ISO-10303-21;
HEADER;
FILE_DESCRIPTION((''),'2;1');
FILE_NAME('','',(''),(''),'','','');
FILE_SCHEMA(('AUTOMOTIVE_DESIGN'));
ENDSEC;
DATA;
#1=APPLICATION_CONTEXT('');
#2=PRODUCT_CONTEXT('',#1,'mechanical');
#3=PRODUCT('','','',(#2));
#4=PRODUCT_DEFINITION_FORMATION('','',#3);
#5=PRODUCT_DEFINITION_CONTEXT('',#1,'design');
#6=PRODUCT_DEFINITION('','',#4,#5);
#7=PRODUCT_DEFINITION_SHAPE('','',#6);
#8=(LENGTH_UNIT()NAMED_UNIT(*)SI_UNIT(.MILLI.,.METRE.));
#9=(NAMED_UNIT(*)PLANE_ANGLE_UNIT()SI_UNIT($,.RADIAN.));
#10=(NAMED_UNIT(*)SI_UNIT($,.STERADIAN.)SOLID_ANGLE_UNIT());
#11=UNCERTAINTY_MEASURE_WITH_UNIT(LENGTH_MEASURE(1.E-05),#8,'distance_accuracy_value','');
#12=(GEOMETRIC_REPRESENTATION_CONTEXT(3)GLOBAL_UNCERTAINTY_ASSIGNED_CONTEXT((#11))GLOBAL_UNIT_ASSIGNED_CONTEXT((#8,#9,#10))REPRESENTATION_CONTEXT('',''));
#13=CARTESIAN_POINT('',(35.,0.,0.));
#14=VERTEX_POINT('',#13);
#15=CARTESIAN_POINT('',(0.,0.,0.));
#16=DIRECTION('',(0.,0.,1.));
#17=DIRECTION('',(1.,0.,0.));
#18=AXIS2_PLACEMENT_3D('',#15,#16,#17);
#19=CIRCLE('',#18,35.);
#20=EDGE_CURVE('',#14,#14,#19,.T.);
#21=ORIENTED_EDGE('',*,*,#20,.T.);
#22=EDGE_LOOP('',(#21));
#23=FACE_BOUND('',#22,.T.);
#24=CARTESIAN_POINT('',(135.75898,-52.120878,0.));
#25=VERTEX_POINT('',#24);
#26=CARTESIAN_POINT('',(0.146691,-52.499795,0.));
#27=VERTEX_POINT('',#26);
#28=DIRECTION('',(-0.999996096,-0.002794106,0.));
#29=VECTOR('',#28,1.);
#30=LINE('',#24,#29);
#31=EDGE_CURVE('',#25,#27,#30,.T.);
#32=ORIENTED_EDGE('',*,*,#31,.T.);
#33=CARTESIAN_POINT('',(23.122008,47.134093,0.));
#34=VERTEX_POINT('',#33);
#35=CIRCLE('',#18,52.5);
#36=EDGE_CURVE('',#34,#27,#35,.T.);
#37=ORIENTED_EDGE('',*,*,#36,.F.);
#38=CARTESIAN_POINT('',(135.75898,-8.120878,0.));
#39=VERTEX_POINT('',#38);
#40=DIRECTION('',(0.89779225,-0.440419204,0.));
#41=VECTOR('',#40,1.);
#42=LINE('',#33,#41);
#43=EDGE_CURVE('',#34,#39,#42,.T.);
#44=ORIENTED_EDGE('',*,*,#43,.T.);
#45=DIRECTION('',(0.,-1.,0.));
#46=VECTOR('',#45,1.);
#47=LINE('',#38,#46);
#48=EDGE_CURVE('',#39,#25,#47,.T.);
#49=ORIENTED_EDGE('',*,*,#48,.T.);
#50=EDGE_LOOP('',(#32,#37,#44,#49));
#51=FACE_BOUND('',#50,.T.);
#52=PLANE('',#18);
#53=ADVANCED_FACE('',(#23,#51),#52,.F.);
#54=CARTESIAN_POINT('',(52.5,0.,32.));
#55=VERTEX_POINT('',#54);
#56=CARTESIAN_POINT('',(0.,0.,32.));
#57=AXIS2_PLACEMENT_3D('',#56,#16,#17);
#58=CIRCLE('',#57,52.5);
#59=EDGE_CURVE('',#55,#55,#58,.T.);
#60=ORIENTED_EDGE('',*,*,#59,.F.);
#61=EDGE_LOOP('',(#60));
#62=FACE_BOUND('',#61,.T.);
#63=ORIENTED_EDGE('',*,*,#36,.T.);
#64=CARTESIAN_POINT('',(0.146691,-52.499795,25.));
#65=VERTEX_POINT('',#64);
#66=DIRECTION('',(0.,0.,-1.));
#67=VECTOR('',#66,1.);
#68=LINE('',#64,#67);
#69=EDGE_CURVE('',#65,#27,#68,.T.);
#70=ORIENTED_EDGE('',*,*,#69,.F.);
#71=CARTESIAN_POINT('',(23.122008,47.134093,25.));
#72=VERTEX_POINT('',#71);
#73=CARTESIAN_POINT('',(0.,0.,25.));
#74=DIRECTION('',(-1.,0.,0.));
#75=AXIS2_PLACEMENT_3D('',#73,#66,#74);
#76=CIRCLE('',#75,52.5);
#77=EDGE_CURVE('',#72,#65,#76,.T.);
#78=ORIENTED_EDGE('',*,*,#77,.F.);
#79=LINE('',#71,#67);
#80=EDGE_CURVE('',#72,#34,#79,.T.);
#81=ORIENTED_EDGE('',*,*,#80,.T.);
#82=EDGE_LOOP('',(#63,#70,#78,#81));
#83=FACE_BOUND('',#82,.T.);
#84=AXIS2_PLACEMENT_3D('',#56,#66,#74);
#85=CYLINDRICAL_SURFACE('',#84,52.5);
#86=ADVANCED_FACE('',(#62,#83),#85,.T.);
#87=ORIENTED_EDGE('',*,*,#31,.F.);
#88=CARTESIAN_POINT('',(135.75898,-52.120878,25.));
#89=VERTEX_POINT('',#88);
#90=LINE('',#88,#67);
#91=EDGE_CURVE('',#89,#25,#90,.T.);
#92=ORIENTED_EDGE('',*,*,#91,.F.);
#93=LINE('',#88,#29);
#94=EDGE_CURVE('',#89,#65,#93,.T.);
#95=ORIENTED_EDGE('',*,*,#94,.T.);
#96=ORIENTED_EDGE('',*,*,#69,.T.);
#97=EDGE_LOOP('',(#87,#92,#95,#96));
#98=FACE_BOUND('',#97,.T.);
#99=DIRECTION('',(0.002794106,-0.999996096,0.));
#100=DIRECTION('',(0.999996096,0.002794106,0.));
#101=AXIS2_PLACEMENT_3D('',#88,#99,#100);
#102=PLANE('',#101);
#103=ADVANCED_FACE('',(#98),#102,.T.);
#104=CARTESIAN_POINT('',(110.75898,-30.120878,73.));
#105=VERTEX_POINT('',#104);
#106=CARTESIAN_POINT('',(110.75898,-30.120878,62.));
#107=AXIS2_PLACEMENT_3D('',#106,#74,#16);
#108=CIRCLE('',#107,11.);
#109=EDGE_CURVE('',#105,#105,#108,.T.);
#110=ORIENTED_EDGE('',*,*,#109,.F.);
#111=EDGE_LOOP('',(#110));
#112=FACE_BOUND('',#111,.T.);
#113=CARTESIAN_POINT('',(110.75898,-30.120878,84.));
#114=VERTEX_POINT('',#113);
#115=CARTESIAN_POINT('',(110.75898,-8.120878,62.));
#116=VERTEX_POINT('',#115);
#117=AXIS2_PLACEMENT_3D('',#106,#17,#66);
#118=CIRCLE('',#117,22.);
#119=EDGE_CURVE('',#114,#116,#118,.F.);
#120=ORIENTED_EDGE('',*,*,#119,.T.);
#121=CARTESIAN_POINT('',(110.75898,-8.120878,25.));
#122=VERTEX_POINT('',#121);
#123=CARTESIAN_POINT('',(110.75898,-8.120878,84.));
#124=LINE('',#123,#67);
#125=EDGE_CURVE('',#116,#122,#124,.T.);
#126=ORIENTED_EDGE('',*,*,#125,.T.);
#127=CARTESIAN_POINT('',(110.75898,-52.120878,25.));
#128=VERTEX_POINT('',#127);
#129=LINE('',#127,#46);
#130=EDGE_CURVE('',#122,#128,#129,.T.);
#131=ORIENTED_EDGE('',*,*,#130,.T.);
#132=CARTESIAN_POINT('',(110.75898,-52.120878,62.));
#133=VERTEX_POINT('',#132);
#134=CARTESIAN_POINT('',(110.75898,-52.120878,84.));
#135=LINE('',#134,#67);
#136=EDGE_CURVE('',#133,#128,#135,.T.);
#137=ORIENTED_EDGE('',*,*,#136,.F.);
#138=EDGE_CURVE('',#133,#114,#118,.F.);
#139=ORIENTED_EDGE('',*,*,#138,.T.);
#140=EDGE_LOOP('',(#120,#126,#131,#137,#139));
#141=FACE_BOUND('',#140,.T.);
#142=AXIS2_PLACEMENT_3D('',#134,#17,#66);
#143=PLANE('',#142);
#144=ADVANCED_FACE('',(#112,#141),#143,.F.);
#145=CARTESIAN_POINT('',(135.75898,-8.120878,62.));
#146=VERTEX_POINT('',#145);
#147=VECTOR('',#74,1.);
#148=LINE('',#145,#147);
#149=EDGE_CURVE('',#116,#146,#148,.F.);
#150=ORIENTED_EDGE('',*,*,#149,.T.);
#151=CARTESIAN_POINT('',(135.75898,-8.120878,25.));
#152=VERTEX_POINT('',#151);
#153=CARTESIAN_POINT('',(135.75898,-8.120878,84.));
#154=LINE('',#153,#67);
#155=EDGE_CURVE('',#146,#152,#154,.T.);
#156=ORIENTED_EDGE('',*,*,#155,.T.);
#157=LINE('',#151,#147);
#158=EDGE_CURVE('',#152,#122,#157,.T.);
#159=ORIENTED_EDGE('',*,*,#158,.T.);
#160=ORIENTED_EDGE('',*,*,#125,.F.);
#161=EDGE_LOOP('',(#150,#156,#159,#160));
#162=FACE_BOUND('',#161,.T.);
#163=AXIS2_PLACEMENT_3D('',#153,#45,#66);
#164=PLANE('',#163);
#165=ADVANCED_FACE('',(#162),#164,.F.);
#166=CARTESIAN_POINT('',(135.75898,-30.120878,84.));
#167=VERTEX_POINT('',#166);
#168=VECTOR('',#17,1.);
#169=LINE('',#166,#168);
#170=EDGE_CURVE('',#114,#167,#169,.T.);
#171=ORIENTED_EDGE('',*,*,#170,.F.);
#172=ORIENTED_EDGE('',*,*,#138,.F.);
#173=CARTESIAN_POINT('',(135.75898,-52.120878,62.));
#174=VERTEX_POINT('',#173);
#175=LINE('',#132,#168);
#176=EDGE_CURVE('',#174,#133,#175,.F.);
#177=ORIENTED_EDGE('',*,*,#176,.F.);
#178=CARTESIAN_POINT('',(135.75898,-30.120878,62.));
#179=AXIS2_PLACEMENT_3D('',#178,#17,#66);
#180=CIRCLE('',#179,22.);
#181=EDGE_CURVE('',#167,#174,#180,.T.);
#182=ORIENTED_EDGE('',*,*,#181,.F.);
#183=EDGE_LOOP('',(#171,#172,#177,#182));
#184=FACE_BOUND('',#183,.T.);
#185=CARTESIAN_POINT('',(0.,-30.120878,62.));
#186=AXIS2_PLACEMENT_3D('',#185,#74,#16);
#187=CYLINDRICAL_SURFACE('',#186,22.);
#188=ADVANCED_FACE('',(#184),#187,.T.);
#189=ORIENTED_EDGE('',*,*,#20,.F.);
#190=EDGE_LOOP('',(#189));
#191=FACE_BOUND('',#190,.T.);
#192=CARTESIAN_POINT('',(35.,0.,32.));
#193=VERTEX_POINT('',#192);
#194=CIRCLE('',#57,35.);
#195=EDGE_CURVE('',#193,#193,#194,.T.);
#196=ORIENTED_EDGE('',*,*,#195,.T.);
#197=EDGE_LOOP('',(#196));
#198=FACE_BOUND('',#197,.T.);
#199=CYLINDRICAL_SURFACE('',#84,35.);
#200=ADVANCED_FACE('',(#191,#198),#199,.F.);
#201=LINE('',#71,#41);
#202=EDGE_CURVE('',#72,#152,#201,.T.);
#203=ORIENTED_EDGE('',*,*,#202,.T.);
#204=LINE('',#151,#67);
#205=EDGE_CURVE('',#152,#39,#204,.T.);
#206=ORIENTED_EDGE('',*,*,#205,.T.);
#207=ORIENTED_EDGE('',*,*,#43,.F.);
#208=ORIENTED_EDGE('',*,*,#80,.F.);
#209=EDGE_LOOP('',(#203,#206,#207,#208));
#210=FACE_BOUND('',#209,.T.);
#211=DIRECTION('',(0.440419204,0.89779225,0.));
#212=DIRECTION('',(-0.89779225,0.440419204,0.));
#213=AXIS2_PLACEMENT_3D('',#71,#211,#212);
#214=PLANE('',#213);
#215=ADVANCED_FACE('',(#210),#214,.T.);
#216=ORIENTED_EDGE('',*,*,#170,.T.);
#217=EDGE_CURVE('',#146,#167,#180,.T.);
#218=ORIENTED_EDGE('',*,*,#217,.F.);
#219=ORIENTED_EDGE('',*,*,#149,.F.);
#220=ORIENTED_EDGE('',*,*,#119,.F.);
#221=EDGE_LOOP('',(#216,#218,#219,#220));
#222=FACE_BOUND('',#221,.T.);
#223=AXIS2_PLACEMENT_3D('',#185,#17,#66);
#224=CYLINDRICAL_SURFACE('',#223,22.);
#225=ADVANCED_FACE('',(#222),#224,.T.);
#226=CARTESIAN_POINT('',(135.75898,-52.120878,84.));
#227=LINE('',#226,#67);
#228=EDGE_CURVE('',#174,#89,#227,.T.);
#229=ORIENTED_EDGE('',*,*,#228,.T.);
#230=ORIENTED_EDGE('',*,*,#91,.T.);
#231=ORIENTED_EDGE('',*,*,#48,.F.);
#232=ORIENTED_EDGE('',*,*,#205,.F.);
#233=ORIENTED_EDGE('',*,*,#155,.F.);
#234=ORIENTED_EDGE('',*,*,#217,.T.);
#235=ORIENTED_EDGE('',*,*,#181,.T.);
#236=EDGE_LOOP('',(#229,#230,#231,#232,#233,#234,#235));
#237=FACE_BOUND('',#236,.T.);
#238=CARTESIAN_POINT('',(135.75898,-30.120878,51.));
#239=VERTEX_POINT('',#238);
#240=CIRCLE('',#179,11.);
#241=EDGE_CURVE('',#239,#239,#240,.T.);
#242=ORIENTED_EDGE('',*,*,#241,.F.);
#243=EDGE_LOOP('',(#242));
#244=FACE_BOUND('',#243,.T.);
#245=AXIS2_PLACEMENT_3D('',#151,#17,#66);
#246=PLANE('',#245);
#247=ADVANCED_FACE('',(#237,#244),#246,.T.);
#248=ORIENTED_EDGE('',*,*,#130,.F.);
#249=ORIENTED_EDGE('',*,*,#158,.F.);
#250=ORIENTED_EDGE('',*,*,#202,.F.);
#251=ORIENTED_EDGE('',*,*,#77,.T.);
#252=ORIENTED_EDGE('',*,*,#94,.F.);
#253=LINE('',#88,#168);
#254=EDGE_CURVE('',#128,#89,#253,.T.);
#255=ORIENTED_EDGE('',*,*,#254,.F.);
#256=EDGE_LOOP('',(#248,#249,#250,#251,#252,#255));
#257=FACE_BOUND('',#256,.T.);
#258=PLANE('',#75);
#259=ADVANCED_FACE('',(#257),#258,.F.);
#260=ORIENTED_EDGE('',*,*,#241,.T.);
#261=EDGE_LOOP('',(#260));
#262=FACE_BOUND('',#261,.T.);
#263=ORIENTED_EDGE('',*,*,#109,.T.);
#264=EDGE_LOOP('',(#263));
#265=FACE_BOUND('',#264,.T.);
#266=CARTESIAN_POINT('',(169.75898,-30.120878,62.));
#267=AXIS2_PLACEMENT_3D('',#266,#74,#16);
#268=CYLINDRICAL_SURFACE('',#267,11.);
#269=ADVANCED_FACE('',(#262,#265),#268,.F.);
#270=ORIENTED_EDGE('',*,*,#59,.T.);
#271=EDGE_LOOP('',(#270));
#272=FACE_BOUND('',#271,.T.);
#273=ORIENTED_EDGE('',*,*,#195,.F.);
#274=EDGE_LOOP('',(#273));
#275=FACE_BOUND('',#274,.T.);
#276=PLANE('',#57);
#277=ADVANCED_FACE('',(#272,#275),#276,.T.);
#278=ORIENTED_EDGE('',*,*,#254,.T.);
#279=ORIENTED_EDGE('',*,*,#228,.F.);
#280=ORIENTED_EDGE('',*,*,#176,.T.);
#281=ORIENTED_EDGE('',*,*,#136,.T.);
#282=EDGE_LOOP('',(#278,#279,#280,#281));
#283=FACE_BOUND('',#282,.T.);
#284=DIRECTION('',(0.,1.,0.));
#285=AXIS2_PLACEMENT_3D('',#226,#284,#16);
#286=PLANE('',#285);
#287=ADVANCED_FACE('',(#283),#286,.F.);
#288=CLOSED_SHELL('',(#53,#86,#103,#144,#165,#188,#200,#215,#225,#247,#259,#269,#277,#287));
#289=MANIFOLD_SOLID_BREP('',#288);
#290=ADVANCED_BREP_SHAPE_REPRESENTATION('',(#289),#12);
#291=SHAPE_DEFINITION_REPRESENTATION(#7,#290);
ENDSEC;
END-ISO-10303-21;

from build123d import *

# Parameters (mm, degrees)
SKETCH_1_R          = 52.5
SKETCH_1_R_2        = 35
EXTRUDE_1_DEPTH     = 32
EXTRUDE_3_DEPTH     = 25
SKETCH_3_W          = 25
SKETCH_3_H          = 44
EXTRUDE_4_DEPTH     = 59
FILLET_1_R          = 22
SKETCH_4_R          = 11
CUT_EXTRUDE_1_DEPTH = 59


with BuildPart() as part:
    # 스케치1 → 보스-돌출1 (new body)
    with BuildSketch(Plane.XY):
        Circle(SKETCH_1_R)
        Circle(SKETCH_1_R_2, mode=Mode.SUBTRACT)
    extrude(amount=EXTRUDE_1_DEPTH)

    # 스케치2 → 보스-돌출3 (add)
    with BuildSketch(Plane(origin=(0, 0, 0), x_dir=(-1, 0, 0), z_dir=(0, 0, -1))):
        with BuildLine():
            Line((-23.122008196, 47.134093149), (-135.758979711, -8.120878455))
            Line((-135.758979711, -8.120878455), (-135.758979711, -52.120878455))
            Line((-135.758979711, -52.120878455), (-0.146690573, -52.499795065))
            ThreePointArc((-0.146690573, -52.499795065), (-51.157462855, -11.796778977), (-23.122008196, 47.134093149))
        make_face()
    extrude(amount=-EXTRUDE_3_DEPTH)

    # 스케치3 → 보스-돌출4 (add)
    with BuildSketch(Plane.XY.offset(25)):
        with Locations((123.258979711, -30.120878455)):
            Rectangle(SKETCH_3_W, SKETCH_3_H)
    extrude(amount=EXTRUDE_4_DEPTH)

    # 필렛1
    fillet_1_edges = [part.edges().sort_by_distance(p)[0] for p in [
        (123.258979711, -8.120878455, 84),
        (123.258979711, -52.120878455, 84),
    ]]
    fillet(fillet_1_edges, radius=FILLET_1_R - 0.0001)  # a hair under: the kernel refuses the full size

    # 스케치4 → 컷-돌출1 (cut)
    with BuildSketch(Plane.ZY.offset(-110.758979711)):
        with Locations((62, -30.120878455)):
            Circle(SKETCH_4_R)
    extrude(amount=-CUT_EXTRUDE_1_DEPTH, mode=Mode.SUBTRACT)


solid = part.part
